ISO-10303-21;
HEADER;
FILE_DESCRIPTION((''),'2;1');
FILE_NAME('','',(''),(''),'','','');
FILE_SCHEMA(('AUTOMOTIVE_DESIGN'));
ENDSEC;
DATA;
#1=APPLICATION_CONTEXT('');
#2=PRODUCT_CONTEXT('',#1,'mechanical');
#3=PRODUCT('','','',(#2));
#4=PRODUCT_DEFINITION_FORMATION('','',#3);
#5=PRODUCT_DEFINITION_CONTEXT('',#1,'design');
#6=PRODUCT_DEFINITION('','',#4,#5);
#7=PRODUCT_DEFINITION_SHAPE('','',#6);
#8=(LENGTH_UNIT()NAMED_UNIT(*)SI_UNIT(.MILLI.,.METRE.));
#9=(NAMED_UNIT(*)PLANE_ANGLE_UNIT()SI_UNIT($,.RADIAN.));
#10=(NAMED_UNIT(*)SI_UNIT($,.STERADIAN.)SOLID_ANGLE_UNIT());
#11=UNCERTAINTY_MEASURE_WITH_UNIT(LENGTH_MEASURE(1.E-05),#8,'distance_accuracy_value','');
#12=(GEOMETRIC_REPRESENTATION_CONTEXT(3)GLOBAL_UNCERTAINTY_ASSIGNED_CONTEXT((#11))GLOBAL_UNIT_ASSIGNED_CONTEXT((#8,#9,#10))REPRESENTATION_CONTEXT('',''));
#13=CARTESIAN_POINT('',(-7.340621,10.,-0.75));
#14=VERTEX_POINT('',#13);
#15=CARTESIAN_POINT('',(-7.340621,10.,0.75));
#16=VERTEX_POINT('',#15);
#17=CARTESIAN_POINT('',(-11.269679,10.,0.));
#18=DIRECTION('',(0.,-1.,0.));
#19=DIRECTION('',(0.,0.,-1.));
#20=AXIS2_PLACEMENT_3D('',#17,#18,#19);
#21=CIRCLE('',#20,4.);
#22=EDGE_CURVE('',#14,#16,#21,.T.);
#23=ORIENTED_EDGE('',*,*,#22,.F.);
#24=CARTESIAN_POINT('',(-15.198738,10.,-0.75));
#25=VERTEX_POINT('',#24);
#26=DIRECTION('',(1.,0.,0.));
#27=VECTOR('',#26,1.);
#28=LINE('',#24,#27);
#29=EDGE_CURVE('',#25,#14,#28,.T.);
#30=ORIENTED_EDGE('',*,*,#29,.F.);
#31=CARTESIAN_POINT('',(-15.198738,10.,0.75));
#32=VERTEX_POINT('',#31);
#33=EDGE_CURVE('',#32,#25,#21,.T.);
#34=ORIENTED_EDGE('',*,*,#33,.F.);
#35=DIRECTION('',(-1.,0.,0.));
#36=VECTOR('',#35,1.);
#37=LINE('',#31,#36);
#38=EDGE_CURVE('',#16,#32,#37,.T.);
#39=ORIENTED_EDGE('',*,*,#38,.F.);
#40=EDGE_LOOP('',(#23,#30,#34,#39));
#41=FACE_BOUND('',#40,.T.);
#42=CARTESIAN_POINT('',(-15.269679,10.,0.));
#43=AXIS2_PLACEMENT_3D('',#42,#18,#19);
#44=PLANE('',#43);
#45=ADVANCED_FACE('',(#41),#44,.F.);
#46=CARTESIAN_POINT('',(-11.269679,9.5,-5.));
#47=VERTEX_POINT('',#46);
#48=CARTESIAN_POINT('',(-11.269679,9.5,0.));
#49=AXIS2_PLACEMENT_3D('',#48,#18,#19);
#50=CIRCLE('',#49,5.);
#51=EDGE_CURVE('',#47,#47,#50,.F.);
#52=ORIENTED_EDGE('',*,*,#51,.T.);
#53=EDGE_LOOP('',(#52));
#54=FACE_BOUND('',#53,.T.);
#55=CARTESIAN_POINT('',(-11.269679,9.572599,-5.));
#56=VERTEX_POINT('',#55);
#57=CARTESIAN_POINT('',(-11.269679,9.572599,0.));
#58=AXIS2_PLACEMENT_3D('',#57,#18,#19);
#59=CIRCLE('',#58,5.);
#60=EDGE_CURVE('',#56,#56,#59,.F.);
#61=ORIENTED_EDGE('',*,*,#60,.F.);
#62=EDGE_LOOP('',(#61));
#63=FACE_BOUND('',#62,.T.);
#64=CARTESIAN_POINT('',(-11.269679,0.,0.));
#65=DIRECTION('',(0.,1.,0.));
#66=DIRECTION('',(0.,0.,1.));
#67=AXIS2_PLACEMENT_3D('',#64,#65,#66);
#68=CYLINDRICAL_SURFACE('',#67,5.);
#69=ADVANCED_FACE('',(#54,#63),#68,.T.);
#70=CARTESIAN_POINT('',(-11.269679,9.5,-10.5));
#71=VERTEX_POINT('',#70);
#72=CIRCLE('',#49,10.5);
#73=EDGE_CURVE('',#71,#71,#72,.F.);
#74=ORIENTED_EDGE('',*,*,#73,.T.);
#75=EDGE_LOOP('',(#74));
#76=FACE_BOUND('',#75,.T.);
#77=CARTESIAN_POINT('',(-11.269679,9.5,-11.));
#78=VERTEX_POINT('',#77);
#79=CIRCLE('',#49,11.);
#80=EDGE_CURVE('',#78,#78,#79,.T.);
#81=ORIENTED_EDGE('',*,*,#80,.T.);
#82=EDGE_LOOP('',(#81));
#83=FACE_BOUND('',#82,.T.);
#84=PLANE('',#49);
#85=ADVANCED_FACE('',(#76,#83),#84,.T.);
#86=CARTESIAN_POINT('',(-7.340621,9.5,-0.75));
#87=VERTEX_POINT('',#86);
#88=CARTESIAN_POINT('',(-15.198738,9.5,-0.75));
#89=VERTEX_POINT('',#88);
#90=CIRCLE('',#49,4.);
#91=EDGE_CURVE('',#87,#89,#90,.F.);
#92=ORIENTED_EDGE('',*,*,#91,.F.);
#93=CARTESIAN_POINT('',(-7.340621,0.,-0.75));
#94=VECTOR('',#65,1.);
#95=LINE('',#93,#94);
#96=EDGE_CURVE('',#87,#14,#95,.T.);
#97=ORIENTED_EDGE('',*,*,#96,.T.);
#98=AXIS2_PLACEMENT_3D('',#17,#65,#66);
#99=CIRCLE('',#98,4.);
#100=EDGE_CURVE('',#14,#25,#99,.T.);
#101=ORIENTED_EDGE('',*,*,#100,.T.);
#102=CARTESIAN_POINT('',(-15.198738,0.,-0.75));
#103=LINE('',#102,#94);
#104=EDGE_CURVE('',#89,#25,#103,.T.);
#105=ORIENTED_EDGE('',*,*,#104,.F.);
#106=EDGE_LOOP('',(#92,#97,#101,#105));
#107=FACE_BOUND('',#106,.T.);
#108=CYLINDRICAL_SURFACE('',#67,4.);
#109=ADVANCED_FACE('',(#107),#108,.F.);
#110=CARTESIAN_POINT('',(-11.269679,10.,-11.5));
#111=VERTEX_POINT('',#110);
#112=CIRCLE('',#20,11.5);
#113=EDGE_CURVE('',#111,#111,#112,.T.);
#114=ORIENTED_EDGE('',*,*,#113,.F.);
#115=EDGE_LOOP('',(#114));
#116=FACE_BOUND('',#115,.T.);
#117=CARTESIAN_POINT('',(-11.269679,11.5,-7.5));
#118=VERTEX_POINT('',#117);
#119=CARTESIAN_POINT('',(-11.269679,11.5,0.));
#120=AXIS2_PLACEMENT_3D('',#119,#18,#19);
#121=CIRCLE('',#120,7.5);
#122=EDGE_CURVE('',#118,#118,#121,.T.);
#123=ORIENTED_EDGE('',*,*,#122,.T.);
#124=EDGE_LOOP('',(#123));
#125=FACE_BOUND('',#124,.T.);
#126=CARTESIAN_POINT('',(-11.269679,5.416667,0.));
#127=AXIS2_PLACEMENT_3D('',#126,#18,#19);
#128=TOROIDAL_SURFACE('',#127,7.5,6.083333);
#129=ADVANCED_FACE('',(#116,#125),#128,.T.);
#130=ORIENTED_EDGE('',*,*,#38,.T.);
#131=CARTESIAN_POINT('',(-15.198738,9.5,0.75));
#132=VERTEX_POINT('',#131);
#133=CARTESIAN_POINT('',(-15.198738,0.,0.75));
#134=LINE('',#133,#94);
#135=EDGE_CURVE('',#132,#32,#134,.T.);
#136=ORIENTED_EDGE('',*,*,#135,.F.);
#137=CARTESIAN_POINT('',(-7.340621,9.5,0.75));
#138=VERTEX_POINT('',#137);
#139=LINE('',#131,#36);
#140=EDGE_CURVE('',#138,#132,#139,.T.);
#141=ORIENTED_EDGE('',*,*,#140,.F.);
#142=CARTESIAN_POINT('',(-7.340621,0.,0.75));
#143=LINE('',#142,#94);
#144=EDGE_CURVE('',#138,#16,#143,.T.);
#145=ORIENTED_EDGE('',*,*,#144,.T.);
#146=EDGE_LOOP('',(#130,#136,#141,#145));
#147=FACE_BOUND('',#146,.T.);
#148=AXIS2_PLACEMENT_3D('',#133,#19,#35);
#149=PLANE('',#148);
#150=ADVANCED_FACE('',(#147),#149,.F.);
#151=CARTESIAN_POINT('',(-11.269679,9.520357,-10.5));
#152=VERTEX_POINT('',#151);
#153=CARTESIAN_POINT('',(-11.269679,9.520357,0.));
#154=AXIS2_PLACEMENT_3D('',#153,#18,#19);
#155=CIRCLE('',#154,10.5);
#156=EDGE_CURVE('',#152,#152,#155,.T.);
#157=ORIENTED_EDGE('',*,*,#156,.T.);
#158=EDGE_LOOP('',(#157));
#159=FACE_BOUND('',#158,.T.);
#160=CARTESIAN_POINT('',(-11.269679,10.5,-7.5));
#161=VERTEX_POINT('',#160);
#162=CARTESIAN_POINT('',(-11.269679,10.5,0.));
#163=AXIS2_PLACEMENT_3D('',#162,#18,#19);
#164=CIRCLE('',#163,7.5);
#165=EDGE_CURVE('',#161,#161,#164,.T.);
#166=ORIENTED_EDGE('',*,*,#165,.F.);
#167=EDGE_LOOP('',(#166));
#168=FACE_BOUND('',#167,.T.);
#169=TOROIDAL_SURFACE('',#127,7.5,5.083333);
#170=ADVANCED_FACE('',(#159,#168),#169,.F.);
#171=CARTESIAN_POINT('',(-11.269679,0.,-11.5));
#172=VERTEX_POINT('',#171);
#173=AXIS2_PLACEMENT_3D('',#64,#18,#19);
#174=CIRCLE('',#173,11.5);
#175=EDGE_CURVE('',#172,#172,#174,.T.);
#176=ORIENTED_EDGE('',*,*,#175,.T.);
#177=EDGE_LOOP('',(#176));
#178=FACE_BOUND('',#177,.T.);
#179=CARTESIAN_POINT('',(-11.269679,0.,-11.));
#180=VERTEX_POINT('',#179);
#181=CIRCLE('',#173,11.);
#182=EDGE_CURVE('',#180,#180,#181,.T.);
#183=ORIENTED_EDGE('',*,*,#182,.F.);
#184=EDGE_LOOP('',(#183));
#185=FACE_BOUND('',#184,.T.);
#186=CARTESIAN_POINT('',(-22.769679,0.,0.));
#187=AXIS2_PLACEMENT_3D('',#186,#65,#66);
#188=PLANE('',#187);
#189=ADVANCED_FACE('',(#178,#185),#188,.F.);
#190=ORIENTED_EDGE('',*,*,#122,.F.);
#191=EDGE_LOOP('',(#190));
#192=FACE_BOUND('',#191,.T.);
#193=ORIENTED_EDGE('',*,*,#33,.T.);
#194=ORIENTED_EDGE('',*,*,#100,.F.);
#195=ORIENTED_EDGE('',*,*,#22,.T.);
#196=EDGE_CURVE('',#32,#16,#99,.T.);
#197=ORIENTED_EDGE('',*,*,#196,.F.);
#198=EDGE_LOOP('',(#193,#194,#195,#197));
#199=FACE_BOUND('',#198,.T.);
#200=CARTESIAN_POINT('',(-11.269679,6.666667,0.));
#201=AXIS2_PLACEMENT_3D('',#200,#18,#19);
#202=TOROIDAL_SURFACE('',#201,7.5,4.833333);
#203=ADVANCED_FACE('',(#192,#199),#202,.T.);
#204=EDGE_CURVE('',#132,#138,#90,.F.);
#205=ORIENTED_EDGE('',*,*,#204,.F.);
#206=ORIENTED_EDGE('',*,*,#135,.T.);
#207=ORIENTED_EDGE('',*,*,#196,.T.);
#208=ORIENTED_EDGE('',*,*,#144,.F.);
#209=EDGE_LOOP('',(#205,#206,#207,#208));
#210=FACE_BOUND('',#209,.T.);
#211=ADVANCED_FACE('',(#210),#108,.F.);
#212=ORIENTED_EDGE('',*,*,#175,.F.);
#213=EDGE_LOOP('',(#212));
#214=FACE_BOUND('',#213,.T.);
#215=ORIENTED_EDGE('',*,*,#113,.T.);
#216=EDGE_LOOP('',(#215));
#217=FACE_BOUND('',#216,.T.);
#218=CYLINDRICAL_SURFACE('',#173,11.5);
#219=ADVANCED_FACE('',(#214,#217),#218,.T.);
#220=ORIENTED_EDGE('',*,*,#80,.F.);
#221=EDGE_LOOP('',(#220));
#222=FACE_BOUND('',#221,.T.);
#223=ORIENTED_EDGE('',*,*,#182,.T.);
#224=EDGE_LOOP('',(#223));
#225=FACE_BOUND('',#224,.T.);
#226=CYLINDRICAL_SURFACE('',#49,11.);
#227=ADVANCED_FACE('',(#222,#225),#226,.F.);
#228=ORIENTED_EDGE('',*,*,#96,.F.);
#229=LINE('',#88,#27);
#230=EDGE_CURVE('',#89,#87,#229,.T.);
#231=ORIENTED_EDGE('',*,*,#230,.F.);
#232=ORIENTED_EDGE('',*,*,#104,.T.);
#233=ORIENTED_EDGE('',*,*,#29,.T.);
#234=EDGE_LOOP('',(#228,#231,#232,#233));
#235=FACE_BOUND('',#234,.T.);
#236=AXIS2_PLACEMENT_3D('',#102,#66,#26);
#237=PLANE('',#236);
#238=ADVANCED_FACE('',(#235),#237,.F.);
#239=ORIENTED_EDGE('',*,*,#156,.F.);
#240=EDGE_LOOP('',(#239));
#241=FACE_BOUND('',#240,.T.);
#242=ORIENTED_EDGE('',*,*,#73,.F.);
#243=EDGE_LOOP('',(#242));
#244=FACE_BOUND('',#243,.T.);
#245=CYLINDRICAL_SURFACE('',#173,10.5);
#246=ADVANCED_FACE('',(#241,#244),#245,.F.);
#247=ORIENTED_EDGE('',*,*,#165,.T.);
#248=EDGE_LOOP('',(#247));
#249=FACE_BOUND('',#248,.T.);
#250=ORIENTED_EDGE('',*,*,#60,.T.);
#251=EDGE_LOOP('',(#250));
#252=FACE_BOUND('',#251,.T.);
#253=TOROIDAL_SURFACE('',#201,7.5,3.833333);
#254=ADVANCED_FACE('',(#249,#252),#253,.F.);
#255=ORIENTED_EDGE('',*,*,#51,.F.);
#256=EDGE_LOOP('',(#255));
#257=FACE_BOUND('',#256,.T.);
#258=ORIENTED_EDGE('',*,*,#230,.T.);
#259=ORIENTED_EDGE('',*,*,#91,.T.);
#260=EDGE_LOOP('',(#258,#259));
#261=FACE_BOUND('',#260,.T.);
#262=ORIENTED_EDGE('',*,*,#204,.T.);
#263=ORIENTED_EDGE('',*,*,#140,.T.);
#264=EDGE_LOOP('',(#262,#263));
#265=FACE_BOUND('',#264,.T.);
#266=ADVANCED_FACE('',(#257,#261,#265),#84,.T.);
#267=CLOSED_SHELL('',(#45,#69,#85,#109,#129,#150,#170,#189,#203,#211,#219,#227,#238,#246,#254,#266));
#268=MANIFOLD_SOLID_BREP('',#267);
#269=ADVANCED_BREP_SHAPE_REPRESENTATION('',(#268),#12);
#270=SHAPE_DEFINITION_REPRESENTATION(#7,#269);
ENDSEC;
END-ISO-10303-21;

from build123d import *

# Parameters (mm, degrees)
CORTAR_EXTRUIR1_DEPTH = 10
CROQUIS3_R            = 11
CORTAR_EXTRUIR3_DEPTH = 9.5


# Read off the part's stored shape, not the designer's step: Vaciado4
with BuildPart() as part:
    # Croquis1 → Revolución1 (revolve)
    with BuildSketch(Plane.XY, mode=Mode.PRIVATE) as revoluci_n1_sk:
        with BuildLine():
            Line((-22.7696793, 0), (-22.7696793, 10))
            ThreePointArc((-22.7696793, 10), (-20.905680237, 11.112669164), (-18.7696793, 11.5))
            ThreePointArc((-18.7696793, 11.5), (-16.865736024, 11.109200978), (-15.2696793, 10))
            Line((-15.2696793, 10), (-11.2696793, 10))
            Line((-11.2696793, 10), (-11.2696793, 0))
            Line((-11.2696793, 0), (-22.7696793, 0))
        make_face()
    revolve(revoluci_n1_sk.sketch.rotate(Axis((-11.2696793, 0, 0), (0, 1, 0)), 270), axis=Axis((-11.2696793, 0, 0), (0, 1, 0)))

    # Croquis2 → Cortar-Extruir1 (cut)
    with BuildSketch(Plane(origin=(0, 10, 0), x_dir=(1, 0, 0), z_dir=(0, 1, 0))):
        with BuildLine():
            Line((-15.198737712, 0.75), (-7.340620889, 0.75))
            ThreePointArc((-7.340620889, 0.75), (-11.2696793, 4), (-15.198737712, 0.75))
        make_face()
        with BuildLine():
            Line((-15.198737712, -0.75), (-7.340620889, -0.75))
            ThreePointArc((-7.340620889, -0.75), (-11.2696793, -4), (-15.198737712, -0.75))
        make_face()
    extrude(amount=-CORTAR_EXTRUIR1_DEPTH, mode=Mode.SUBTRACT)

    # Croquis3 → Cortar-Extruir3 (cut)
    with BuildSketch(Plane.XZ):
        with Locations(Location((-11.2696793, 0, 0), (0, 0, 270))):
            Circle(CROQUIS3_R)
    extrude(amount=-CORTAR_EXTRUIR3_DEPTH, mode=Mode.SUBTRACT)

    # Vaciado4 outline → Vaciado4 (revolve, cut)
    with BuildSketch(Plane(origin=(-11.2696793, 0, 0), x_dir=(1, 0, 0), z_dir=(0, 0, 1))):
        with BuildLine():
            Line((10.5, 9.5), (10.5, 9.520357417))
            ThreePointArc((10.5, 9.520357417), (9.077949586, 10.248886951), (7.5, 10.5))
            ThreePointArc((7.5, 10.5), (6.166764081, 10.260679247), (5, 9.572599296))
            Line((5, 9.572599296), (5, 9.5))
            Line((5, 9.5), (10.5, 9.5))
        make_face()
    revolve(axis=Axis((-11.2696793, 0, 0), (0, 1, 0)), mode=Mode.SUBTRACT)


solid = part.part
